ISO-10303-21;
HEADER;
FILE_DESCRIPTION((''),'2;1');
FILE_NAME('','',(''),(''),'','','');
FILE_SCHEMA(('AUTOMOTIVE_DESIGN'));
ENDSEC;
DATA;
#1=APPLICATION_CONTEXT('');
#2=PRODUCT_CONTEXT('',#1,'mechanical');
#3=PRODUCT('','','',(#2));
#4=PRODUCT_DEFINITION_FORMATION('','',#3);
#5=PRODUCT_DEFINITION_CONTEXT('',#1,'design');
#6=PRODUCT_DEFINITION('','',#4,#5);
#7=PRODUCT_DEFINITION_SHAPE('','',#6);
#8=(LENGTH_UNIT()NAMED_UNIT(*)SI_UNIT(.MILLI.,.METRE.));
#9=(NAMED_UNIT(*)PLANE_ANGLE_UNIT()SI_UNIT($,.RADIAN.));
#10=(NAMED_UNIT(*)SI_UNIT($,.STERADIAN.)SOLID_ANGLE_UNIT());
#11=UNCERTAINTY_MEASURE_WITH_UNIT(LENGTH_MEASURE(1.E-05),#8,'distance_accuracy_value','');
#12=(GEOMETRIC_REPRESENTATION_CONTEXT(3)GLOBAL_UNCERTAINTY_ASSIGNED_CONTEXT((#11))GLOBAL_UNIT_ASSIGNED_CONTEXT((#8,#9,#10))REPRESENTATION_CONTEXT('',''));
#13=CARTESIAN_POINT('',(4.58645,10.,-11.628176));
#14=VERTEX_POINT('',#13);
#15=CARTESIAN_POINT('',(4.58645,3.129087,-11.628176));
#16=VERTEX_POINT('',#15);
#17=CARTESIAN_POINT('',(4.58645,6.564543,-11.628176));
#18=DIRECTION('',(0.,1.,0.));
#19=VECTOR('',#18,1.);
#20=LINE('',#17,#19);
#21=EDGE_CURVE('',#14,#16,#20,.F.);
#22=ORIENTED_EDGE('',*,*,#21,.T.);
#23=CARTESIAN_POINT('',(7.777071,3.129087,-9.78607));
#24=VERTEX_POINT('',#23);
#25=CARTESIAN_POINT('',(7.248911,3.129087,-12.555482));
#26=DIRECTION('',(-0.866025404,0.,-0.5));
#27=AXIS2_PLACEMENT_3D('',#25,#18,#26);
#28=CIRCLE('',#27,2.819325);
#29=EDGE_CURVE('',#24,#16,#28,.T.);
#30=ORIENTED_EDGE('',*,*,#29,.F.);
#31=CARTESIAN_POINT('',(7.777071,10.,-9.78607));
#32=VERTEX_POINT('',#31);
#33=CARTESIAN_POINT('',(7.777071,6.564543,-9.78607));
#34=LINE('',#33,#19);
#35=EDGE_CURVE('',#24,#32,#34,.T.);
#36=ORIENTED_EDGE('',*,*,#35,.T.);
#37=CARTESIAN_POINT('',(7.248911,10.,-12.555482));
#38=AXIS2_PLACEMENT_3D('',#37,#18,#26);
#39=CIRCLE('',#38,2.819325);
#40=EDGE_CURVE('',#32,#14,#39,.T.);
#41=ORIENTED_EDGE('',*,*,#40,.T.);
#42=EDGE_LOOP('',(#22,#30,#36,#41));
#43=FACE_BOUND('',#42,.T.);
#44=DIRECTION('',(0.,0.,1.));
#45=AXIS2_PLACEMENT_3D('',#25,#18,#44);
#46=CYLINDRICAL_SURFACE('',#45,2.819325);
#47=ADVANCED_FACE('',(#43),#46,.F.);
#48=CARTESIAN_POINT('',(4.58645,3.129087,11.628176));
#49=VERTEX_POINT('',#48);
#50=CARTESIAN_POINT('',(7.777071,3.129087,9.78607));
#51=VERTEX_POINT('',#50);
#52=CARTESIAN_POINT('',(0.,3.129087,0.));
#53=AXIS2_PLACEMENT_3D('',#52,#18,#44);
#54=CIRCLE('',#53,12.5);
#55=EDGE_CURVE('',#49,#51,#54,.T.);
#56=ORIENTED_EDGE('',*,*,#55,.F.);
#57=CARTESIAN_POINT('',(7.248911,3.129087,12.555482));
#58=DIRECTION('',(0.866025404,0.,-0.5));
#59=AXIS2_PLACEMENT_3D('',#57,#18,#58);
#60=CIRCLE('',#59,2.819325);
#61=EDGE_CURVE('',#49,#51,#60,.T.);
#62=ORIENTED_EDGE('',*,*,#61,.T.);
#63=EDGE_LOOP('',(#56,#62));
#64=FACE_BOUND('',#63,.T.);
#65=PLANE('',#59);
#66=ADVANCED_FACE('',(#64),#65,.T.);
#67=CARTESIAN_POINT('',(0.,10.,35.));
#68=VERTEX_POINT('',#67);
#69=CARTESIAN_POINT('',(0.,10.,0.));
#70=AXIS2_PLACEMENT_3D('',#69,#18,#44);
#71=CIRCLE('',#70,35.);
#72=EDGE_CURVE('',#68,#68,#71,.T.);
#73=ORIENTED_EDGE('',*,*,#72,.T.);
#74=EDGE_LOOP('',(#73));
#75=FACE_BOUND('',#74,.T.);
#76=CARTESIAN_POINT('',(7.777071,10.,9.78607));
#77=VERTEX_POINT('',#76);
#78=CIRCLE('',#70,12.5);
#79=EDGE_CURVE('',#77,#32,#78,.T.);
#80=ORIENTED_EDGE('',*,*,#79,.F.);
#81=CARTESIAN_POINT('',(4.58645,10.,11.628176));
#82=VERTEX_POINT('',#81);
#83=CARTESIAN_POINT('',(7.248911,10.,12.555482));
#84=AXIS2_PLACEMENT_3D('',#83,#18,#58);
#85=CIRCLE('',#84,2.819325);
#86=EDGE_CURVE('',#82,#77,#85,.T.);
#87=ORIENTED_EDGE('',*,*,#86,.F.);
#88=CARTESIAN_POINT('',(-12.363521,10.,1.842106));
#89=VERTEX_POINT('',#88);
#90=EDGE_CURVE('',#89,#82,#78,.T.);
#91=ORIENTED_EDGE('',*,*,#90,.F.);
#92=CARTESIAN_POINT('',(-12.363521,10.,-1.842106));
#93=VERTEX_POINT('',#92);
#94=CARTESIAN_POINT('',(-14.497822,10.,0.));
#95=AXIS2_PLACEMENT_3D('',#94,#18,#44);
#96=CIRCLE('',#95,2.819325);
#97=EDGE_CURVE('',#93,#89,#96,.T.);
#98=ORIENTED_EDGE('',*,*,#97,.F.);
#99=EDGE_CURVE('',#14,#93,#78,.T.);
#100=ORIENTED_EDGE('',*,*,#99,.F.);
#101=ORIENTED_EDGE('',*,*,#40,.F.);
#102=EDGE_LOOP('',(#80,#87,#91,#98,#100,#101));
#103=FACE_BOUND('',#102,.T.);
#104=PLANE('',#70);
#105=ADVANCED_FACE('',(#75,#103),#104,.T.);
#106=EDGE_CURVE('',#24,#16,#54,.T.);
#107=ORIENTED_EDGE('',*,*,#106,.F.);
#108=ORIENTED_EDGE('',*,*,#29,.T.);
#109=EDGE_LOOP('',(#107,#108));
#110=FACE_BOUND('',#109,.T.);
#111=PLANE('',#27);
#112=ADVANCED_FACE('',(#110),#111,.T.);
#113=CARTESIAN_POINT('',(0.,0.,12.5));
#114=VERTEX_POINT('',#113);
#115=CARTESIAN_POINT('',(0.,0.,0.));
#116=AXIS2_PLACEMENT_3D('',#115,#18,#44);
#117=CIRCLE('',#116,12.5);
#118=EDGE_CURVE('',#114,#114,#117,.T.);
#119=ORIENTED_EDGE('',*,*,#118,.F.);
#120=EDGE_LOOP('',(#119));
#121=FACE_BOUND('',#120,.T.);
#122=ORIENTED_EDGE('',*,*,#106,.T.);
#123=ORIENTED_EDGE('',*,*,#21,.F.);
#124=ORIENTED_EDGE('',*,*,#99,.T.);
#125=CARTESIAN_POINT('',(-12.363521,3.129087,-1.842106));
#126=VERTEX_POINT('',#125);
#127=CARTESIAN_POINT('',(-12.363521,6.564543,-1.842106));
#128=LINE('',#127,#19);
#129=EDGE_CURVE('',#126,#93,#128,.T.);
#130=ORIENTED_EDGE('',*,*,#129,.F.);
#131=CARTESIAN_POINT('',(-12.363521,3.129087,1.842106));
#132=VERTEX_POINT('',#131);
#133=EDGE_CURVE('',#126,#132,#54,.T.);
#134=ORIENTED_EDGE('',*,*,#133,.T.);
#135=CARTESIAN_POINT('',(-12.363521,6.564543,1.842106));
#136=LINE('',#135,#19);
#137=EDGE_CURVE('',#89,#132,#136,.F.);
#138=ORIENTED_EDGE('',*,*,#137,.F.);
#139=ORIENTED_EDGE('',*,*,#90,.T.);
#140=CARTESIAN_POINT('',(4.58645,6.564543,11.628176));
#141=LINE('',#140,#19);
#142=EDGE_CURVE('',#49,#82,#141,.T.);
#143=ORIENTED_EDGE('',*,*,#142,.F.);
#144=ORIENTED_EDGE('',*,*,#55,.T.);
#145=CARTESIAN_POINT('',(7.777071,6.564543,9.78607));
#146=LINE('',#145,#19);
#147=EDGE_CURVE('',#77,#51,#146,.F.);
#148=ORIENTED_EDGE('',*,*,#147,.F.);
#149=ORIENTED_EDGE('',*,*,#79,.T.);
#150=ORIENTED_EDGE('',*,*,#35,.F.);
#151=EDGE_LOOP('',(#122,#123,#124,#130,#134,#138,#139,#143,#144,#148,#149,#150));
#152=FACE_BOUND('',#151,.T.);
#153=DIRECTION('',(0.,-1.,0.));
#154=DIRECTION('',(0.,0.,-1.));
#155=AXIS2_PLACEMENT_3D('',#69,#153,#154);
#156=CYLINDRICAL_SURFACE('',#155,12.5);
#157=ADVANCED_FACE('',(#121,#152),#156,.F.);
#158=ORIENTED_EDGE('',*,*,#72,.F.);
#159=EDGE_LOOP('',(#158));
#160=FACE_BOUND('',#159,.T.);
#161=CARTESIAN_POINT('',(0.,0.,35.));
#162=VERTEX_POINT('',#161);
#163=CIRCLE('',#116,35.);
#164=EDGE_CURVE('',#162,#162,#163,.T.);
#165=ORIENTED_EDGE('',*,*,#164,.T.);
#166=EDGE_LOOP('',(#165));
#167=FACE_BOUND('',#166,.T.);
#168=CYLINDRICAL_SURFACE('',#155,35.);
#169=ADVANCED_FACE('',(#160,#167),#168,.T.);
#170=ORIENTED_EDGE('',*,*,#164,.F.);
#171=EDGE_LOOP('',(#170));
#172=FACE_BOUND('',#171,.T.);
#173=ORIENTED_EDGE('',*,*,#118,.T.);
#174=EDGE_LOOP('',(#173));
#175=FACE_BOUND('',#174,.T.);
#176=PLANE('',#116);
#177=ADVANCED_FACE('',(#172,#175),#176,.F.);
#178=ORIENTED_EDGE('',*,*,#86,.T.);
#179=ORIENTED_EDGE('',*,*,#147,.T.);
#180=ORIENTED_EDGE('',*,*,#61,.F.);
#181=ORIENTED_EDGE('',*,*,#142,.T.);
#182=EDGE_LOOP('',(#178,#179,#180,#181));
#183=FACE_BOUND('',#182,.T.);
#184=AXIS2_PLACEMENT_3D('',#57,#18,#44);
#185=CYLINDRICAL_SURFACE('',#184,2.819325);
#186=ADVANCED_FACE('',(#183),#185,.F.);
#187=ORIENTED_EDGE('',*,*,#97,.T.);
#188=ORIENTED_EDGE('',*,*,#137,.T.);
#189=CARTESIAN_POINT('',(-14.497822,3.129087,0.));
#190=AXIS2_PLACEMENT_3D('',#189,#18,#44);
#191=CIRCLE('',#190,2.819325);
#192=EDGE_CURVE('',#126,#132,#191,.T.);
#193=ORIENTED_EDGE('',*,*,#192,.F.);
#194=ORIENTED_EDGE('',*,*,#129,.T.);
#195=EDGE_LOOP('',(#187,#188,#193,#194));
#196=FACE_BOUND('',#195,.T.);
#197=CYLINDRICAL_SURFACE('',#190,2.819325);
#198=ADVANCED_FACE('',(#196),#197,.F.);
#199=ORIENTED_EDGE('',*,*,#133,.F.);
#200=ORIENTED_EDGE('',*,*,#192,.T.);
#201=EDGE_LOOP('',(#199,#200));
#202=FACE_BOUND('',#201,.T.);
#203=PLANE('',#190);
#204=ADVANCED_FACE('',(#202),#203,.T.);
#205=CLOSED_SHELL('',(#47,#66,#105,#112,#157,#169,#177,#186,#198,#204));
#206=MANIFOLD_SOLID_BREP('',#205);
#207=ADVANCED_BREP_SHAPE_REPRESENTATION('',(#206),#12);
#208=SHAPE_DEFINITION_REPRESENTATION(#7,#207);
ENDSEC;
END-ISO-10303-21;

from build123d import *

# Parameters (mm, degrees)
SKETCH1_R           = 35
BOSS_EXTRUDE1_DEPTH = 10
SKETCH2_R           = 12.5
CUT_EXTRUDE1_DEPTH  = 51.497524692
SKETCH3_R           = 2.819325065
CUT_EXTRUDE2_DEPTH  = 6.870913211
CIRPATTERN1_COUNT   = 3


with BuildPart() as part:
    # Sketch1 → Boss-Extrude1 (new body)
    with BuildSketch(Plane(origin=(0, 0, 0), x_dir=(1, 0, 0), z_dir=(0, 1, 0))):
        Circle(SKETCH1_R)
    extrude(amount=BOSS_EXTRUDE1_DEPTH)

    # Sketch2 → Cut-Extrude1 (cut, through all)
    with BuildSketch(Plane(origin=(0, 0, 0), x_dir=(1, 0, 0), z_dir=(0, 1, 0))):
        Circle(SKETCH2_R)
    extrude(amount=CUT_EXTRUDE1_DEPTH, mode=Mode.SUBTRACT)

    # Sketch3 → Cut-Extrude2 (cut)
    with BuildSketch(Plane(origin=(0, 10, 0), x_dir=(1, 0, 0), z_dir=(0, 1, 0))):
        with Locations((-14.497821503, 0)):
            Circle(SKETCH3_R)
    cut_extrude2 = extrude(amount=-CUT_EXTRUDE2_DEPTH, mode=Mode.SUBTRACT)

    # CirPattern1: Cut-Extrude2 ×3 about axis
    cirpattern1_axis = Axis((0, 0, 0), (0, 1, 0))
    for i in range(1, CIRPATTERN1_COUNT):
        add(cut_extrude2.rotate(cirpattern1_axis, i * 360 / CIRPATTERN1_COUNT), mode=Mode.SUBTRACT)


solid = part.part
